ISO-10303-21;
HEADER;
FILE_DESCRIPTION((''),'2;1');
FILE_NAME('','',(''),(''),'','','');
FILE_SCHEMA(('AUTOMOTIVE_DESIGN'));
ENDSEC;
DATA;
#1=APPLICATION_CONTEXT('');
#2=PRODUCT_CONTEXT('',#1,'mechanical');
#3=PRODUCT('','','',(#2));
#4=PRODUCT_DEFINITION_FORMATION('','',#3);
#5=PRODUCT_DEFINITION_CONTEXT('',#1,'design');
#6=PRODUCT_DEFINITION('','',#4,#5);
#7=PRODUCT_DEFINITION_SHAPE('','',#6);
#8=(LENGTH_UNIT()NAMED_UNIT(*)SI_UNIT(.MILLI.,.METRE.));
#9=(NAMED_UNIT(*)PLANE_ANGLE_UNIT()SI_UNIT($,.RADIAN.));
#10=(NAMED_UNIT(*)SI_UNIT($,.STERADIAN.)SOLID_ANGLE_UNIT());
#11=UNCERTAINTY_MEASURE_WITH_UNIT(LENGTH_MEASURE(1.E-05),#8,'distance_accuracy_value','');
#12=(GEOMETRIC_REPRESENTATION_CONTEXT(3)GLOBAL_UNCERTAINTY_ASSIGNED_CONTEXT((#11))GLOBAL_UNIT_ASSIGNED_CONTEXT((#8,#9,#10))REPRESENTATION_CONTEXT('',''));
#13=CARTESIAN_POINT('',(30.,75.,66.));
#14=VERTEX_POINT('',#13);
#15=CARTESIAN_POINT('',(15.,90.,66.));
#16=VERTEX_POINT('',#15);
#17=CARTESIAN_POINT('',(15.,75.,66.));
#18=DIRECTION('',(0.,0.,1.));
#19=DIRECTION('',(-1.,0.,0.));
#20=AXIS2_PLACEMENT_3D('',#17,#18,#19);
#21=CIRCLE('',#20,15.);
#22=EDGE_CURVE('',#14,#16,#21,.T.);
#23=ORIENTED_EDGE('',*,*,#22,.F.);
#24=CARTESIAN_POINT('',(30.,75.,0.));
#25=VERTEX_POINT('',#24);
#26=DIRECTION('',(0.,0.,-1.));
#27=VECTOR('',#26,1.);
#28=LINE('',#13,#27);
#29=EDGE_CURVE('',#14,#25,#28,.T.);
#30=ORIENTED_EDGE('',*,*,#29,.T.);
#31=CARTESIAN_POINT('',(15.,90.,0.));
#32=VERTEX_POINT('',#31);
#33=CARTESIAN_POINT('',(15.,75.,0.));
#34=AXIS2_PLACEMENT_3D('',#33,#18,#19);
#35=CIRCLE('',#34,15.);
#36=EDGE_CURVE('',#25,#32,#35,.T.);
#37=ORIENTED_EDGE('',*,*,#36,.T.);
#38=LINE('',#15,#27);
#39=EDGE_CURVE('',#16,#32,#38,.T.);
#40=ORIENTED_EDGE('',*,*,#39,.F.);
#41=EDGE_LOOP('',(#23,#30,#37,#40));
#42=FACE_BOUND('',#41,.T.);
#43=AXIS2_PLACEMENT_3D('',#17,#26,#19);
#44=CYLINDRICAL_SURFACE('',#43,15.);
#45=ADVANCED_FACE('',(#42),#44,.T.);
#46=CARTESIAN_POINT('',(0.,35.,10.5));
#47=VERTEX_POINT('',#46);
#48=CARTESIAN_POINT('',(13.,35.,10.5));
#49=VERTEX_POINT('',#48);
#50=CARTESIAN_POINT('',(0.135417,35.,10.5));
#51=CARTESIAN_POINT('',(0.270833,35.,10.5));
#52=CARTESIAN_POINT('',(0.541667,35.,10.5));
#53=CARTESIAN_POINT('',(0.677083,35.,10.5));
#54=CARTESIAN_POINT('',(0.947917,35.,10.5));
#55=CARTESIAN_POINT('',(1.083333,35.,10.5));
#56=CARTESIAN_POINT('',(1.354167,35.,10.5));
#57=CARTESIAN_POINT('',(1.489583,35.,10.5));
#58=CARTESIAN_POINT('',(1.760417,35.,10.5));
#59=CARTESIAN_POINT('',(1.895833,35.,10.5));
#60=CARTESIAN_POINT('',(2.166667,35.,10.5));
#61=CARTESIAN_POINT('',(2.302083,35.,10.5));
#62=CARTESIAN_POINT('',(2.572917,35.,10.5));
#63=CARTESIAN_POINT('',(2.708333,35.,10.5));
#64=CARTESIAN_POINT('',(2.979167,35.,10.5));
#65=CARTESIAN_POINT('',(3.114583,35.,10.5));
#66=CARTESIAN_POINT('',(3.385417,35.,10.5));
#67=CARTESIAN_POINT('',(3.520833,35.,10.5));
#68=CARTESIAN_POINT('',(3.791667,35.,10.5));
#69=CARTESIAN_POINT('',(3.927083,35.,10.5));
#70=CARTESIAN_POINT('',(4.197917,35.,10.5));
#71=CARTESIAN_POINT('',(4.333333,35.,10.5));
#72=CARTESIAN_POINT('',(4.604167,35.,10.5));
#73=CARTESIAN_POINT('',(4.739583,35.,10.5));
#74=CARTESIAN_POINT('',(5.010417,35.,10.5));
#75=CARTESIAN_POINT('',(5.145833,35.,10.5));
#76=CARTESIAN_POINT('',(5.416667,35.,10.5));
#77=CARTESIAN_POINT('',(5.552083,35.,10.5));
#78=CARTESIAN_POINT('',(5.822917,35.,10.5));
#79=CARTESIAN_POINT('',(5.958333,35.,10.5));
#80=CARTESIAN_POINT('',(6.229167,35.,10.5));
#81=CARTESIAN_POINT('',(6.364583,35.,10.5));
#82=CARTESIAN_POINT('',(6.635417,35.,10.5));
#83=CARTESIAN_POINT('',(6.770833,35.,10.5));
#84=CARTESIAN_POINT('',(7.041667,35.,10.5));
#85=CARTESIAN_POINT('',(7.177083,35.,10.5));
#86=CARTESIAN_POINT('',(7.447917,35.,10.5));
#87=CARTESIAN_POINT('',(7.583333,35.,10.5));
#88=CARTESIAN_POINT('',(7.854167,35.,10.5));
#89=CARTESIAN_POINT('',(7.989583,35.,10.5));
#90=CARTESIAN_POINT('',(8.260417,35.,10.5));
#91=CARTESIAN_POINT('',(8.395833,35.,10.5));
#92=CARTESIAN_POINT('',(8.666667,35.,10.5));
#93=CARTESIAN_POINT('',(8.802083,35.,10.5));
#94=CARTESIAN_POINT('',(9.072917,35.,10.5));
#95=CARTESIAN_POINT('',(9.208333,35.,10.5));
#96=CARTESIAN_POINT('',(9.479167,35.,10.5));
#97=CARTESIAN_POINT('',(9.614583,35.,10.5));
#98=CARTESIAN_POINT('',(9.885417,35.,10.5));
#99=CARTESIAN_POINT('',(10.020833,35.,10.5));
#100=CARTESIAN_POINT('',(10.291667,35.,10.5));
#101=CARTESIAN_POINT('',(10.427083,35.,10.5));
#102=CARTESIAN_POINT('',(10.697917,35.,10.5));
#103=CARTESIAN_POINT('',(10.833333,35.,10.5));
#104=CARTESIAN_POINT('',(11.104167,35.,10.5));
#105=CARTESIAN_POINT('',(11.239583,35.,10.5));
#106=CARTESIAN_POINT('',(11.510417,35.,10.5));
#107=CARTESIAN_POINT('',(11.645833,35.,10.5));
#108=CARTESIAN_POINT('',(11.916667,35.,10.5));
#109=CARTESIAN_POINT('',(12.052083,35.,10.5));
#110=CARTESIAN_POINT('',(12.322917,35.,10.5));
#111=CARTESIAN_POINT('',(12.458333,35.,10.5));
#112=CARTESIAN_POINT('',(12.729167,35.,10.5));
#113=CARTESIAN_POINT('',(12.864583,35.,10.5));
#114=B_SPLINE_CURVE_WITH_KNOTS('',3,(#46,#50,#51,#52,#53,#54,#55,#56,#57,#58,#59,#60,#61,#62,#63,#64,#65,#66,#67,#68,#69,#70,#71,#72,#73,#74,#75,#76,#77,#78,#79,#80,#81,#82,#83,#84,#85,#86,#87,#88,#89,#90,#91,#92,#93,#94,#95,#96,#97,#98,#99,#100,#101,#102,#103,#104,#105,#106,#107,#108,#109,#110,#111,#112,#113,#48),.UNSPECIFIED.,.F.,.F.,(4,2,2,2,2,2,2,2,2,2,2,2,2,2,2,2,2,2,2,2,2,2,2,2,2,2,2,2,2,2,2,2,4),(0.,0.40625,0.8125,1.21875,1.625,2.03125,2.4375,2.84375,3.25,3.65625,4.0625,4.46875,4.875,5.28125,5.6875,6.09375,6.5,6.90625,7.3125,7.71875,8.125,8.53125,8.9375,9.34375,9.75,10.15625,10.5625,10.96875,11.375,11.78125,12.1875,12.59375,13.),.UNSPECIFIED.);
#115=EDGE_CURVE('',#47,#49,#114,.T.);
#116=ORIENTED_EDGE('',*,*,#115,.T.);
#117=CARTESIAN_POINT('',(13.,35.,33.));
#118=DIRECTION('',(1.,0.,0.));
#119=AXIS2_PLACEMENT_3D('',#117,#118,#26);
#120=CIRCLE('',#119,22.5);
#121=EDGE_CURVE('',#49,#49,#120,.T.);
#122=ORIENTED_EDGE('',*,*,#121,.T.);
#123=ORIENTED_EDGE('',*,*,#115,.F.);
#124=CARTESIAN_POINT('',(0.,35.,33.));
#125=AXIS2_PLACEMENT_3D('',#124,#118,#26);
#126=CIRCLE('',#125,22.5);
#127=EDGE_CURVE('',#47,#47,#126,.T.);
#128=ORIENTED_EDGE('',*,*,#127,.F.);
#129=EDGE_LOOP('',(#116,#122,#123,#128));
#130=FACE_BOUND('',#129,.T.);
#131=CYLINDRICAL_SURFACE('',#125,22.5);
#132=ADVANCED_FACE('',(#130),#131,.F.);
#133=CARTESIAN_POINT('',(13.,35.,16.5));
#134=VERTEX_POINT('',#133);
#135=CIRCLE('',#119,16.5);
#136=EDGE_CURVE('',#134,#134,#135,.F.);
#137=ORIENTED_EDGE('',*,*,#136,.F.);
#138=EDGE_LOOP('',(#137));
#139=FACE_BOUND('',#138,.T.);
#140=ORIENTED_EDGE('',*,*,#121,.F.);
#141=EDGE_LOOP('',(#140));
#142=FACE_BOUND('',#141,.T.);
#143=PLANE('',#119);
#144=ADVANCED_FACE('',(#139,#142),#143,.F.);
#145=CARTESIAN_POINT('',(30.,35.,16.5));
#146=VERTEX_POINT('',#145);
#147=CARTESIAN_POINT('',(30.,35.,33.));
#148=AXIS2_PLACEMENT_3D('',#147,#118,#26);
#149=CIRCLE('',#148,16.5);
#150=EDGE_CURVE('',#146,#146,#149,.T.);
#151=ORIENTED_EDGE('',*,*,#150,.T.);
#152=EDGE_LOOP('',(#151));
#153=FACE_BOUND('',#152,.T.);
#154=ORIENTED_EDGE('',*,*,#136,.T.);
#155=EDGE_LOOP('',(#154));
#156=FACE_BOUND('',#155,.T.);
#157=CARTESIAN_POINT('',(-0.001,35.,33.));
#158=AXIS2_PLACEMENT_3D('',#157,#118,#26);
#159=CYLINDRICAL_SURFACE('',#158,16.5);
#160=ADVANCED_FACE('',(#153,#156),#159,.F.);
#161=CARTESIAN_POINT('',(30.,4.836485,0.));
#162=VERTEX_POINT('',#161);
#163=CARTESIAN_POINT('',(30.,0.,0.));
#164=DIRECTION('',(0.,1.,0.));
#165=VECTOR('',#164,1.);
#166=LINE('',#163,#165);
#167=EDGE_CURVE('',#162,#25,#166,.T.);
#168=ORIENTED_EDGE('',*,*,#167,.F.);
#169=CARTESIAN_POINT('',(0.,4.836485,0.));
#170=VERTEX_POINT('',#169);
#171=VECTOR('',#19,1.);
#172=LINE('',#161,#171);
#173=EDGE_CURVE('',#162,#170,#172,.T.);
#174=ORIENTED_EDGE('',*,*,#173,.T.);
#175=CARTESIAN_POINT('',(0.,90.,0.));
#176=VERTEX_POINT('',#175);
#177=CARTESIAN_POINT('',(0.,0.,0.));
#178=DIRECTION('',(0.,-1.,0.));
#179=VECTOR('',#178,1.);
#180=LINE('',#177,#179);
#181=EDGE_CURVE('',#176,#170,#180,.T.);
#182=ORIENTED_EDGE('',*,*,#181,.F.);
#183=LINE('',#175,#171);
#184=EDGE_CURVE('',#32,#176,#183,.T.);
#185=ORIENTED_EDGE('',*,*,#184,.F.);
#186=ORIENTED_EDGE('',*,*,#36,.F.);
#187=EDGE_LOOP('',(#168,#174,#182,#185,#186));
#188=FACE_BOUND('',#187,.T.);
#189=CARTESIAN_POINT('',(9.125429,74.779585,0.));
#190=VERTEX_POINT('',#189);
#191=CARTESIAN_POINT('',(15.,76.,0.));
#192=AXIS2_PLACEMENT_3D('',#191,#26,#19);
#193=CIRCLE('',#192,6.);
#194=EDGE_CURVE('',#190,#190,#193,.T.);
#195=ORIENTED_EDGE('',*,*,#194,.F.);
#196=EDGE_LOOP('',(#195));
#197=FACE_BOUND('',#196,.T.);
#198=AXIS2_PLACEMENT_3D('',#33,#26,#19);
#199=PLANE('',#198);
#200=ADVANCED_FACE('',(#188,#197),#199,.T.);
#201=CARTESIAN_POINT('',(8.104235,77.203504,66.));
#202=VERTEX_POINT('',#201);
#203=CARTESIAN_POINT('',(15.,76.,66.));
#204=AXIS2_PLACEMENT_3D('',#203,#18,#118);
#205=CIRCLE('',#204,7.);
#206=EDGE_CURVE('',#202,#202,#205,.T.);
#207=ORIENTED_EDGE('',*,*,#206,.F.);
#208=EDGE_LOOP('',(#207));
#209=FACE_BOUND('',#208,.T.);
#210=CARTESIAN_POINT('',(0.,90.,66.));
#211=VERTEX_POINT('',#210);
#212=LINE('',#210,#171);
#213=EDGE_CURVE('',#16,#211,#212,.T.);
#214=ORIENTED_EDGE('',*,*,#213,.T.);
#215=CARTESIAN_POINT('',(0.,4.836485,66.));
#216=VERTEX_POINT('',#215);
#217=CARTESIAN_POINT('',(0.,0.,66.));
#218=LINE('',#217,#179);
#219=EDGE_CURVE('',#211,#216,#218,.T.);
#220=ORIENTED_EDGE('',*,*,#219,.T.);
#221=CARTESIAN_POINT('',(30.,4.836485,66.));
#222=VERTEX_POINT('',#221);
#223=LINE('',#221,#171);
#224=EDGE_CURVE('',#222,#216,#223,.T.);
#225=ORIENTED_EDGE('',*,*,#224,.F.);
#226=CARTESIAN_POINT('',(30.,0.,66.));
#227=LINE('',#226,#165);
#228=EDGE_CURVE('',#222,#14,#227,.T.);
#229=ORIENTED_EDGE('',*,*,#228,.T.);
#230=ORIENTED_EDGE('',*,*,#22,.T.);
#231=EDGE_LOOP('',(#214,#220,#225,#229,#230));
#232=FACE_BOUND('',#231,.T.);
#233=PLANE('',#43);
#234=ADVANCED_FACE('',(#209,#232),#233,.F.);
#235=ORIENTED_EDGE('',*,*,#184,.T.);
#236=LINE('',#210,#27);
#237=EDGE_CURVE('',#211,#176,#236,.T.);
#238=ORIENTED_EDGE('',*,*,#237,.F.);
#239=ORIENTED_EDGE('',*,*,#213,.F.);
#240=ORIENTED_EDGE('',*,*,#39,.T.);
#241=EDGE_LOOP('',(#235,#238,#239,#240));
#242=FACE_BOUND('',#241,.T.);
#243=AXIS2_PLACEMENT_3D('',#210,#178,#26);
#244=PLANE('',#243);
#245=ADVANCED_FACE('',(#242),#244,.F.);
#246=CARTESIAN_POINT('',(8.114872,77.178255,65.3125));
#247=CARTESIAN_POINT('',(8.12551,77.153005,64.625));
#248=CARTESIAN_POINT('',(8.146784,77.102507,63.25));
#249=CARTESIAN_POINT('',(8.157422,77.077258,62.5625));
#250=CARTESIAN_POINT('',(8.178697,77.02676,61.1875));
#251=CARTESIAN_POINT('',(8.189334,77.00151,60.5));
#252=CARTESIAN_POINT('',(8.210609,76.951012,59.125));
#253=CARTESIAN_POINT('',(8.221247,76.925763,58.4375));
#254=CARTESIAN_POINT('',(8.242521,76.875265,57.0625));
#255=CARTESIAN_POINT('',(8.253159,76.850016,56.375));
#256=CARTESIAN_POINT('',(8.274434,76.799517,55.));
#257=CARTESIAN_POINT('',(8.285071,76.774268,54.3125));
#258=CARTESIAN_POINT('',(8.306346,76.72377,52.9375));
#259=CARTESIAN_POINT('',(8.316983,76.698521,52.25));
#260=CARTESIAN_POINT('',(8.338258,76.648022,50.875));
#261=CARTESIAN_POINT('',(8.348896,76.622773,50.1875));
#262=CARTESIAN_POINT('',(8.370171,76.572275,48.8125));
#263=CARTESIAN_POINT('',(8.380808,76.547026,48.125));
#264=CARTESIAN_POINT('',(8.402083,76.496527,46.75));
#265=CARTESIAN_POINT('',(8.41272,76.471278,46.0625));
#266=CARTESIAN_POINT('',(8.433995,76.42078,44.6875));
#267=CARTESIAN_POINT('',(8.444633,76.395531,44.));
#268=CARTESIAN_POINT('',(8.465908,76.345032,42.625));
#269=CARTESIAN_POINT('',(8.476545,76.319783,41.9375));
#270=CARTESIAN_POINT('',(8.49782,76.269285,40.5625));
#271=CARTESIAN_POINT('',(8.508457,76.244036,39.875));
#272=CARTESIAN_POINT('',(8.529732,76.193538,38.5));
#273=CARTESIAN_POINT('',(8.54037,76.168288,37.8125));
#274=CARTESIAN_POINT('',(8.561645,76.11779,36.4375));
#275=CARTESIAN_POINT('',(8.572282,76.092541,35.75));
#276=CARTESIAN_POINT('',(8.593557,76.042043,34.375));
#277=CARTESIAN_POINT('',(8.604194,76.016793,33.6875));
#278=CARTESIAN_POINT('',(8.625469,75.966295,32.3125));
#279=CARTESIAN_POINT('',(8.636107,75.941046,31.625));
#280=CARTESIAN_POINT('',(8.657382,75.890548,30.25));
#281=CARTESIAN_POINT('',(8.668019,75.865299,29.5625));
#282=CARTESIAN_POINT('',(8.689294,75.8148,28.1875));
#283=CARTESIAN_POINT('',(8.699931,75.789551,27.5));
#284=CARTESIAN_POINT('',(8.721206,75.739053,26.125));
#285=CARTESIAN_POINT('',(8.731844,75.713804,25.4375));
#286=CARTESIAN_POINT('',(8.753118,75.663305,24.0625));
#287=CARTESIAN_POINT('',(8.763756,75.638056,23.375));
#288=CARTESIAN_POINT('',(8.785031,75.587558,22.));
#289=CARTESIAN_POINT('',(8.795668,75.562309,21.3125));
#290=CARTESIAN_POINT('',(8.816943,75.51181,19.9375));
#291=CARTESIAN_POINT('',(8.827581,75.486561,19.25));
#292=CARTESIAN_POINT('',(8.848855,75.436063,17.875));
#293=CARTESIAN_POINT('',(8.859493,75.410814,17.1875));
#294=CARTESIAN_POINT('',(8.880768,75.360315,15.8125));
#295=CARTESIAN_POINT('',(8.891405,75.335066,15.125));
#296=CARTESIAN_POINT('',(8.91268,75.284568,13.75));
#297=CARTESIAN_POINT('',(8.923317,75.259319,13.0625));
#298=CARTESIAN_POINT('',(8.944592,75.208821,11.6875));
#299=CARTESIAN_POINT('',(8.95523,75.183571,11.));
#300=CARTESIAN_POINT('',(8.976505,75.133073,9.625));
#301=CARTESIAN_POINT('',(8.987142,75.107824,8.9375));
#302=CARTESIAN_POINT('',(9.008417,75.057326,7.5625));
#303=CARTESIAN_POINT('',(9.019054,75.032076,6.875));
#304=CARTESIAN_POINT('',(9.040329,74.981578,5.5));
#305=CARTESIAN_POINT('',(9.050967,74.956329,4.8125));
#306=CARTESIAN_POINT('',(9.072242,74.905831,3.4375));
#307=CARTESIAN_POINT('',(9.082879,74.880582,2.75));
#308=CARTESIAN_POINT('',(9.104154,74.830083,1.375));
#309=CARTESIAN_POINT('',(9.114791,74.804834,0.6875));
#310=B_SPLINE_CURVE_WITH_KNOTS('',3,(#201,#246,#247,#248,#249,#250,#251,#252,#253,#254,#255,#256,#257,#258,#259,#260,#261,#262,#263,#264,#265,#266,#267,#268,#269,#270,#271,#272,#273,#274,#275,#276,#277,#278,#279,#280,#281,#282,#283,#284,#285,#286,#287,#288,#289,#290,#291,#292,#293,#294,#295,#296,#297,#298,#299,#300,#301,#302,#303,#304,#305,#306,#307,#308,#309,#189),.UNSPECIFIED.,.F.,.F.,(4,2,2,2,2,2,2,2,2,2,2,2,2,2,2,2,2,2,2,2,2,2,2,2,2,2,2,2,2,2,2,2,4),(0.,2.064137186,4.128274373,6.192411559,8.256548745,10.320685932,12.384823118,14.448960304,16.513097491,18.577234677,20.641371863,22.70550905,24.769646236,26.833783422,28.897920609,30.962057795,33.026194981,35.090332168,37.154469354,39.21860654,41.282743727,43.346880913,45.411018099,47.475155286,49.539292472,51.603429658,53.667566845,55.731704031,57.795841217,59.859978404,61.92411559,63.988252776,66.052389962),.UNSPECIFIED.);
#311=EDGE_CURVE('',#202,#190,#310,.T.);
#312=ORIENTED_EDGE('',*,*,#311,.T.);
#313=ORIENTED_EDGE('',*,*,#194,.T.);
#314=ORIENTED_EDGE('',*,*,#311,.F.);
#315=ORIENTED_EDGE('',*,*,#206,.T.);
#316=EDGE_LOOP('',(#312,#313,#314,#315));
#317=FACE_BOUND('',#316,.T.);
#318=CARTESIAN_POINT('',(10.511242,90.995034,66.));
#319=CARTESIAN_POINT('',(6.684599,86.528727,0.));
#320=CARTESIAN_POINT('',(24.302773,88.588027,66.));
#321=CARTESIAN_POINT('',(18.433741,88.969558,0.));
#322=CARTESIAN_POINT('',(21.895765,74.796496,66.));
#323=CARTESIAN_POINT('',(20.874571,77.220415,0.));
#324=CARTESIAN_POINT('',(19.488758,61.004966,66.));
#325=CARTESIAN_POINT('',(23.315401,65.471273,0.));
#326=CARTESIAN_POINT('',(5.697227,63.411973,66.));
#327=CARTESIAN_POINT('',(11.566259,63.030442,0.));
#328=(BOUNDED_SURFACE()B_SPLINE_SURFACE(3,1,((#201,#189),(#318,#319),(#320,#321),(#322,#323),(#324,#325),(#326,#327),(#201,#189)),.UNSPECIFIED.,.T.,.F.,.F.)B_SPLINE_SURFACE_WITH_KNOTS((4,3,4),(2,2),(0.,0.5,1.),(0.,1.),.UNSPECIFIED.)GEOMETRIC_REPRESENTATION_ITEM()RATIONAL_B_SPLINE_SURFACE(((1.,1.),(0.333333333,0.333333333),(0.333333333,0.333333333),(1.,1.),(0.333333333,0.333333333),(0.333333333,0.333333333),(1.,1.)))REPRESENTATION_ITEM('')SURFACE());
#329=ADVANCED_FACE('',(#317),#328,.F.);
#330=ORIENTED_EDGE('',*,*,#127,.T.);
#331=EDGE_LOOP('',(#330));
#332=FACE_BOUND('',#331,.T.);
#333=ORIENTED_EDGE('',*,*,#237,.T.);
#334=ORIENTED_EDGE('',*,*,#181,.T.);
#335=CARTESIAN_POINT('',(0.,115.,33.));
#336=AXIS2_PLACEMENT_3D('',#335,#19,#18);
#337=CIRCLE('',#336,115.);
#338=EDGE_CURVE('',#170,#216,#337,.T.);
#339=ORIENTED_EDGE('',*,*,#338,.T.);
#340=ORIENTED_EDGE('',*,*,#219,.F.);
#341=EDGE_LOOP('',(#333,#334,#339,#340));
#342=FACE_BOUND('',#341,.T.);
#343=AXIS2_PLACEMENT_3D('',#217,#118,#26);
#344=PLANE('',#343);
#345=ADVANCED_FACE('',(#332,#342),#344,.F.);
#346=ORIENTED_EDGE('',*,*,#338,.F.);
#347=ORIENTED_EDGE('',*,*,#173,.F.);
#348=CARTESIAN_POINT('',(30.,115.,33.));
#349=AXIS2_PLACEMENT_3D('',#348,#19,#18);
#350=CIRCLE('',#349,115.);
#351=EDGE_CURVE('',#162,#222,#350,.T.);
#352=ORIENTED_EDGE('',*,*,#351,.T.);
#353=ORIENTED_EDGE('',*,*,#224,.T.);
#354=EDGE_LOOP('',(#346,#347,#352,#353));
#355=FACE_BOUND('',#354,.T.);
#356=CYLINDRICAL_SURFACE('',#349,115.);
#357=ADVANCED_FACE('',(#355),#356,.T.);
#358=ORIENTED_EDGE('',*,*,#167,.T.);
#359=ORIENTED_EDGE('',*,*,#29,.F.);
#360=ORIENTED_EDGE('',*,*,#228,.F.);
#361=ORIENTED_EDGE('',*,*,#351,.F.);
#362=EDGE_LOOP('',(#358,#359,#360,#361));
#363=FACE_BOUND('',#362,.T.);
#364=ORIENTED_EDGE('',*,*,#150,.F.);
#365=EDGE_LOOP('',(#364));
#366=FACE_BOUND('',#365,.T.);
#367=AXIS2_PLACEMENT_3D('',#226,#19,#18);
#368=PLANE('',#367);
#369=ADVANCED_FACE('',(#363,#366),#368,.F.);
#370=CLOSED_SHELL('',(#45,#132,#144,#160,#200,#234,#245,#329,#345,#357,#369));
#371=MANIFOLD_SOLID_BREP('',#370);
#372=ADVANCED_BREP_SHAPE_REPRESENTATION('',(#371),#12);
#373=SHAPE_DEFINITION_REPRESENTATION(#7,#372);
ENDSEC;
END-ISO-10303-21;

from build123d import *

# Parameters (mm, degrees)
BOSS_EXTRUDE1_DEPTH = 66
CUT_EXTRUDE2_START  = -17
SKETCH3_R           = 22.5
SKETCH3_R_2         = 16.5
CUT_EXTRUDE2_DEPTH  = 13
CUT_EXTRUDE3_REACH  = 117.568
SKETCH3_2_R         = 16.5
CUT_EXTRUDE5_DEPTH  = 116.568161866


with BuildPart() as part:
    # Sketch1 → Boss-Extrude1 (new body)
    with BuildSketch(Plane.XY):
        with BuildLine():
            Line((0, 0), (30, 0))
            Line((30, 0), (30, 75))
            ThreePointArc((30, 75), (25.606601718, 85.606601718), (15, 90))
            Line((15, 90), (0, 90))
            Line((0, 90), (0, 0))
        make_face()
    extrude(amount=BOSS_EXTRUDE1_DEPTH)

    # Sketch3 → Cut-Extrude2 (cut)
    with BuildSketch(Plane(origin=(30, 0, 0), x_dir=(0, 0, -1), z_dir=(1, 0, 0)).offset(CUT_EXTRUDE2_START)):
        with Locations((-33, 35)):
            Circle(SKETCH3_R)
        with Locations((-33, 35)):
            Circle(SKETCH3_R_2, mode=Mode.SUBTRACT)
    extrude(amount=-CUT_EXTRUDE2_DEPTH, mode=Mode.SUBTRACT)

    # Sketch3<2> → Cut-Extrude3 (cut, up to next)
    with BuildSketch(Plane(origin=(30, 0, 0), x_dir=(0, 0, -1), z_dir=(1, 0, 0)), mode=Mode.PRIVATE) as cut_extrude3_sk1:
        with Locations((-33, 35)):
            Circle(SKETCH3_2_R)
    cut_extrude3_tool1 = extrude(cut_extrude3_sk1.sketch, amount=-CUT_EXTRUDE3_REACH, mode=Mode.PRIVATE) & part.part
    add(cut_extrude3_tool1.solids().sort_by_distance((30, 35, 33))[0], mode=Mode.SUBTRACT)

    # Cut-Loft1: read off the stored shape, not the designer's step
    # Cut-Loft1: loft between two sections, ruled curve by curve
    cut_loft1_from = [
        Edge.make_bspline([(8.104234717, 77.203503702, 66), (10.511242121, 90.995034268, 66), (24.302772687, 88.588026864, 66), (21.895765283, 74.796496298, 66), (19.488757879, 61.004965732, 66), (5.697227313, 63.411973136, 66), (8.104234717, 77.203503702, 66)], [0, 0, 0, 0, 0.5, 0.5, 0.5, 1, 1, 1, 1], 3, [1, 0.333333333, 0.333333333, 1, 0.333333333, 0.333333333, 1]),
    ]
    cut_loft1_to = [
        Edge.make_bspline([(9.125428786, 74.779584885, 0), (6.684598557, 86.528727313, 0), (18.433740984, 88.969557543, 0), (20.874571214, 77.220415115, 0), (23.315401443, 65.471272687, 0), (11.566259016, 63.030442457, 0), (9.125428786, 74.779584885, 0)], [0, 0, 0, 0, 0.5, 0.5, 0.5, 1, 1, 1, 1], 3, [1, 0.333333333, 0.333333333, 1, 0.333333333, 0.333333333, 1]),
    ]
    cut_loft1 = Solid(Shell([*[Face.make_surface_from_curves(cut_loft1_from[k], cut_loft1_to[k]) for k in range(1)], Face(Wire(cut_loft1_from)), Face(Wire(cut_loft1_to))]))
    add(cut_loft1, mode=Mode.SUBTRACT)

    # Sketch8 → Cut-Extrude5 (cut, through all)
    with BuildSketch(Plane.ZY):
        with BuildLine():
            ThreePointArc((33.000000237, 0), (16.323732633, 1.215545408), (0, 4.836485169))
            Line((0, 4.836485169), (0, 0))
            Line((0, 0), (33.000000237, 0))
        make_face()
        with BuildLine():
            ThreePointArc((66, 4.836485169), (49.676267601, 1.215545443), (33.000000237, 0))
            Line((33.000000237, 0), (66, 0))
            Line((66, 0), (66, 4.836485169))
        make_face()
    extrude(amount=-CUT_EXTRUDE5_DEPTH, mode=Mode.SUBTRACT)


solid = part.part
